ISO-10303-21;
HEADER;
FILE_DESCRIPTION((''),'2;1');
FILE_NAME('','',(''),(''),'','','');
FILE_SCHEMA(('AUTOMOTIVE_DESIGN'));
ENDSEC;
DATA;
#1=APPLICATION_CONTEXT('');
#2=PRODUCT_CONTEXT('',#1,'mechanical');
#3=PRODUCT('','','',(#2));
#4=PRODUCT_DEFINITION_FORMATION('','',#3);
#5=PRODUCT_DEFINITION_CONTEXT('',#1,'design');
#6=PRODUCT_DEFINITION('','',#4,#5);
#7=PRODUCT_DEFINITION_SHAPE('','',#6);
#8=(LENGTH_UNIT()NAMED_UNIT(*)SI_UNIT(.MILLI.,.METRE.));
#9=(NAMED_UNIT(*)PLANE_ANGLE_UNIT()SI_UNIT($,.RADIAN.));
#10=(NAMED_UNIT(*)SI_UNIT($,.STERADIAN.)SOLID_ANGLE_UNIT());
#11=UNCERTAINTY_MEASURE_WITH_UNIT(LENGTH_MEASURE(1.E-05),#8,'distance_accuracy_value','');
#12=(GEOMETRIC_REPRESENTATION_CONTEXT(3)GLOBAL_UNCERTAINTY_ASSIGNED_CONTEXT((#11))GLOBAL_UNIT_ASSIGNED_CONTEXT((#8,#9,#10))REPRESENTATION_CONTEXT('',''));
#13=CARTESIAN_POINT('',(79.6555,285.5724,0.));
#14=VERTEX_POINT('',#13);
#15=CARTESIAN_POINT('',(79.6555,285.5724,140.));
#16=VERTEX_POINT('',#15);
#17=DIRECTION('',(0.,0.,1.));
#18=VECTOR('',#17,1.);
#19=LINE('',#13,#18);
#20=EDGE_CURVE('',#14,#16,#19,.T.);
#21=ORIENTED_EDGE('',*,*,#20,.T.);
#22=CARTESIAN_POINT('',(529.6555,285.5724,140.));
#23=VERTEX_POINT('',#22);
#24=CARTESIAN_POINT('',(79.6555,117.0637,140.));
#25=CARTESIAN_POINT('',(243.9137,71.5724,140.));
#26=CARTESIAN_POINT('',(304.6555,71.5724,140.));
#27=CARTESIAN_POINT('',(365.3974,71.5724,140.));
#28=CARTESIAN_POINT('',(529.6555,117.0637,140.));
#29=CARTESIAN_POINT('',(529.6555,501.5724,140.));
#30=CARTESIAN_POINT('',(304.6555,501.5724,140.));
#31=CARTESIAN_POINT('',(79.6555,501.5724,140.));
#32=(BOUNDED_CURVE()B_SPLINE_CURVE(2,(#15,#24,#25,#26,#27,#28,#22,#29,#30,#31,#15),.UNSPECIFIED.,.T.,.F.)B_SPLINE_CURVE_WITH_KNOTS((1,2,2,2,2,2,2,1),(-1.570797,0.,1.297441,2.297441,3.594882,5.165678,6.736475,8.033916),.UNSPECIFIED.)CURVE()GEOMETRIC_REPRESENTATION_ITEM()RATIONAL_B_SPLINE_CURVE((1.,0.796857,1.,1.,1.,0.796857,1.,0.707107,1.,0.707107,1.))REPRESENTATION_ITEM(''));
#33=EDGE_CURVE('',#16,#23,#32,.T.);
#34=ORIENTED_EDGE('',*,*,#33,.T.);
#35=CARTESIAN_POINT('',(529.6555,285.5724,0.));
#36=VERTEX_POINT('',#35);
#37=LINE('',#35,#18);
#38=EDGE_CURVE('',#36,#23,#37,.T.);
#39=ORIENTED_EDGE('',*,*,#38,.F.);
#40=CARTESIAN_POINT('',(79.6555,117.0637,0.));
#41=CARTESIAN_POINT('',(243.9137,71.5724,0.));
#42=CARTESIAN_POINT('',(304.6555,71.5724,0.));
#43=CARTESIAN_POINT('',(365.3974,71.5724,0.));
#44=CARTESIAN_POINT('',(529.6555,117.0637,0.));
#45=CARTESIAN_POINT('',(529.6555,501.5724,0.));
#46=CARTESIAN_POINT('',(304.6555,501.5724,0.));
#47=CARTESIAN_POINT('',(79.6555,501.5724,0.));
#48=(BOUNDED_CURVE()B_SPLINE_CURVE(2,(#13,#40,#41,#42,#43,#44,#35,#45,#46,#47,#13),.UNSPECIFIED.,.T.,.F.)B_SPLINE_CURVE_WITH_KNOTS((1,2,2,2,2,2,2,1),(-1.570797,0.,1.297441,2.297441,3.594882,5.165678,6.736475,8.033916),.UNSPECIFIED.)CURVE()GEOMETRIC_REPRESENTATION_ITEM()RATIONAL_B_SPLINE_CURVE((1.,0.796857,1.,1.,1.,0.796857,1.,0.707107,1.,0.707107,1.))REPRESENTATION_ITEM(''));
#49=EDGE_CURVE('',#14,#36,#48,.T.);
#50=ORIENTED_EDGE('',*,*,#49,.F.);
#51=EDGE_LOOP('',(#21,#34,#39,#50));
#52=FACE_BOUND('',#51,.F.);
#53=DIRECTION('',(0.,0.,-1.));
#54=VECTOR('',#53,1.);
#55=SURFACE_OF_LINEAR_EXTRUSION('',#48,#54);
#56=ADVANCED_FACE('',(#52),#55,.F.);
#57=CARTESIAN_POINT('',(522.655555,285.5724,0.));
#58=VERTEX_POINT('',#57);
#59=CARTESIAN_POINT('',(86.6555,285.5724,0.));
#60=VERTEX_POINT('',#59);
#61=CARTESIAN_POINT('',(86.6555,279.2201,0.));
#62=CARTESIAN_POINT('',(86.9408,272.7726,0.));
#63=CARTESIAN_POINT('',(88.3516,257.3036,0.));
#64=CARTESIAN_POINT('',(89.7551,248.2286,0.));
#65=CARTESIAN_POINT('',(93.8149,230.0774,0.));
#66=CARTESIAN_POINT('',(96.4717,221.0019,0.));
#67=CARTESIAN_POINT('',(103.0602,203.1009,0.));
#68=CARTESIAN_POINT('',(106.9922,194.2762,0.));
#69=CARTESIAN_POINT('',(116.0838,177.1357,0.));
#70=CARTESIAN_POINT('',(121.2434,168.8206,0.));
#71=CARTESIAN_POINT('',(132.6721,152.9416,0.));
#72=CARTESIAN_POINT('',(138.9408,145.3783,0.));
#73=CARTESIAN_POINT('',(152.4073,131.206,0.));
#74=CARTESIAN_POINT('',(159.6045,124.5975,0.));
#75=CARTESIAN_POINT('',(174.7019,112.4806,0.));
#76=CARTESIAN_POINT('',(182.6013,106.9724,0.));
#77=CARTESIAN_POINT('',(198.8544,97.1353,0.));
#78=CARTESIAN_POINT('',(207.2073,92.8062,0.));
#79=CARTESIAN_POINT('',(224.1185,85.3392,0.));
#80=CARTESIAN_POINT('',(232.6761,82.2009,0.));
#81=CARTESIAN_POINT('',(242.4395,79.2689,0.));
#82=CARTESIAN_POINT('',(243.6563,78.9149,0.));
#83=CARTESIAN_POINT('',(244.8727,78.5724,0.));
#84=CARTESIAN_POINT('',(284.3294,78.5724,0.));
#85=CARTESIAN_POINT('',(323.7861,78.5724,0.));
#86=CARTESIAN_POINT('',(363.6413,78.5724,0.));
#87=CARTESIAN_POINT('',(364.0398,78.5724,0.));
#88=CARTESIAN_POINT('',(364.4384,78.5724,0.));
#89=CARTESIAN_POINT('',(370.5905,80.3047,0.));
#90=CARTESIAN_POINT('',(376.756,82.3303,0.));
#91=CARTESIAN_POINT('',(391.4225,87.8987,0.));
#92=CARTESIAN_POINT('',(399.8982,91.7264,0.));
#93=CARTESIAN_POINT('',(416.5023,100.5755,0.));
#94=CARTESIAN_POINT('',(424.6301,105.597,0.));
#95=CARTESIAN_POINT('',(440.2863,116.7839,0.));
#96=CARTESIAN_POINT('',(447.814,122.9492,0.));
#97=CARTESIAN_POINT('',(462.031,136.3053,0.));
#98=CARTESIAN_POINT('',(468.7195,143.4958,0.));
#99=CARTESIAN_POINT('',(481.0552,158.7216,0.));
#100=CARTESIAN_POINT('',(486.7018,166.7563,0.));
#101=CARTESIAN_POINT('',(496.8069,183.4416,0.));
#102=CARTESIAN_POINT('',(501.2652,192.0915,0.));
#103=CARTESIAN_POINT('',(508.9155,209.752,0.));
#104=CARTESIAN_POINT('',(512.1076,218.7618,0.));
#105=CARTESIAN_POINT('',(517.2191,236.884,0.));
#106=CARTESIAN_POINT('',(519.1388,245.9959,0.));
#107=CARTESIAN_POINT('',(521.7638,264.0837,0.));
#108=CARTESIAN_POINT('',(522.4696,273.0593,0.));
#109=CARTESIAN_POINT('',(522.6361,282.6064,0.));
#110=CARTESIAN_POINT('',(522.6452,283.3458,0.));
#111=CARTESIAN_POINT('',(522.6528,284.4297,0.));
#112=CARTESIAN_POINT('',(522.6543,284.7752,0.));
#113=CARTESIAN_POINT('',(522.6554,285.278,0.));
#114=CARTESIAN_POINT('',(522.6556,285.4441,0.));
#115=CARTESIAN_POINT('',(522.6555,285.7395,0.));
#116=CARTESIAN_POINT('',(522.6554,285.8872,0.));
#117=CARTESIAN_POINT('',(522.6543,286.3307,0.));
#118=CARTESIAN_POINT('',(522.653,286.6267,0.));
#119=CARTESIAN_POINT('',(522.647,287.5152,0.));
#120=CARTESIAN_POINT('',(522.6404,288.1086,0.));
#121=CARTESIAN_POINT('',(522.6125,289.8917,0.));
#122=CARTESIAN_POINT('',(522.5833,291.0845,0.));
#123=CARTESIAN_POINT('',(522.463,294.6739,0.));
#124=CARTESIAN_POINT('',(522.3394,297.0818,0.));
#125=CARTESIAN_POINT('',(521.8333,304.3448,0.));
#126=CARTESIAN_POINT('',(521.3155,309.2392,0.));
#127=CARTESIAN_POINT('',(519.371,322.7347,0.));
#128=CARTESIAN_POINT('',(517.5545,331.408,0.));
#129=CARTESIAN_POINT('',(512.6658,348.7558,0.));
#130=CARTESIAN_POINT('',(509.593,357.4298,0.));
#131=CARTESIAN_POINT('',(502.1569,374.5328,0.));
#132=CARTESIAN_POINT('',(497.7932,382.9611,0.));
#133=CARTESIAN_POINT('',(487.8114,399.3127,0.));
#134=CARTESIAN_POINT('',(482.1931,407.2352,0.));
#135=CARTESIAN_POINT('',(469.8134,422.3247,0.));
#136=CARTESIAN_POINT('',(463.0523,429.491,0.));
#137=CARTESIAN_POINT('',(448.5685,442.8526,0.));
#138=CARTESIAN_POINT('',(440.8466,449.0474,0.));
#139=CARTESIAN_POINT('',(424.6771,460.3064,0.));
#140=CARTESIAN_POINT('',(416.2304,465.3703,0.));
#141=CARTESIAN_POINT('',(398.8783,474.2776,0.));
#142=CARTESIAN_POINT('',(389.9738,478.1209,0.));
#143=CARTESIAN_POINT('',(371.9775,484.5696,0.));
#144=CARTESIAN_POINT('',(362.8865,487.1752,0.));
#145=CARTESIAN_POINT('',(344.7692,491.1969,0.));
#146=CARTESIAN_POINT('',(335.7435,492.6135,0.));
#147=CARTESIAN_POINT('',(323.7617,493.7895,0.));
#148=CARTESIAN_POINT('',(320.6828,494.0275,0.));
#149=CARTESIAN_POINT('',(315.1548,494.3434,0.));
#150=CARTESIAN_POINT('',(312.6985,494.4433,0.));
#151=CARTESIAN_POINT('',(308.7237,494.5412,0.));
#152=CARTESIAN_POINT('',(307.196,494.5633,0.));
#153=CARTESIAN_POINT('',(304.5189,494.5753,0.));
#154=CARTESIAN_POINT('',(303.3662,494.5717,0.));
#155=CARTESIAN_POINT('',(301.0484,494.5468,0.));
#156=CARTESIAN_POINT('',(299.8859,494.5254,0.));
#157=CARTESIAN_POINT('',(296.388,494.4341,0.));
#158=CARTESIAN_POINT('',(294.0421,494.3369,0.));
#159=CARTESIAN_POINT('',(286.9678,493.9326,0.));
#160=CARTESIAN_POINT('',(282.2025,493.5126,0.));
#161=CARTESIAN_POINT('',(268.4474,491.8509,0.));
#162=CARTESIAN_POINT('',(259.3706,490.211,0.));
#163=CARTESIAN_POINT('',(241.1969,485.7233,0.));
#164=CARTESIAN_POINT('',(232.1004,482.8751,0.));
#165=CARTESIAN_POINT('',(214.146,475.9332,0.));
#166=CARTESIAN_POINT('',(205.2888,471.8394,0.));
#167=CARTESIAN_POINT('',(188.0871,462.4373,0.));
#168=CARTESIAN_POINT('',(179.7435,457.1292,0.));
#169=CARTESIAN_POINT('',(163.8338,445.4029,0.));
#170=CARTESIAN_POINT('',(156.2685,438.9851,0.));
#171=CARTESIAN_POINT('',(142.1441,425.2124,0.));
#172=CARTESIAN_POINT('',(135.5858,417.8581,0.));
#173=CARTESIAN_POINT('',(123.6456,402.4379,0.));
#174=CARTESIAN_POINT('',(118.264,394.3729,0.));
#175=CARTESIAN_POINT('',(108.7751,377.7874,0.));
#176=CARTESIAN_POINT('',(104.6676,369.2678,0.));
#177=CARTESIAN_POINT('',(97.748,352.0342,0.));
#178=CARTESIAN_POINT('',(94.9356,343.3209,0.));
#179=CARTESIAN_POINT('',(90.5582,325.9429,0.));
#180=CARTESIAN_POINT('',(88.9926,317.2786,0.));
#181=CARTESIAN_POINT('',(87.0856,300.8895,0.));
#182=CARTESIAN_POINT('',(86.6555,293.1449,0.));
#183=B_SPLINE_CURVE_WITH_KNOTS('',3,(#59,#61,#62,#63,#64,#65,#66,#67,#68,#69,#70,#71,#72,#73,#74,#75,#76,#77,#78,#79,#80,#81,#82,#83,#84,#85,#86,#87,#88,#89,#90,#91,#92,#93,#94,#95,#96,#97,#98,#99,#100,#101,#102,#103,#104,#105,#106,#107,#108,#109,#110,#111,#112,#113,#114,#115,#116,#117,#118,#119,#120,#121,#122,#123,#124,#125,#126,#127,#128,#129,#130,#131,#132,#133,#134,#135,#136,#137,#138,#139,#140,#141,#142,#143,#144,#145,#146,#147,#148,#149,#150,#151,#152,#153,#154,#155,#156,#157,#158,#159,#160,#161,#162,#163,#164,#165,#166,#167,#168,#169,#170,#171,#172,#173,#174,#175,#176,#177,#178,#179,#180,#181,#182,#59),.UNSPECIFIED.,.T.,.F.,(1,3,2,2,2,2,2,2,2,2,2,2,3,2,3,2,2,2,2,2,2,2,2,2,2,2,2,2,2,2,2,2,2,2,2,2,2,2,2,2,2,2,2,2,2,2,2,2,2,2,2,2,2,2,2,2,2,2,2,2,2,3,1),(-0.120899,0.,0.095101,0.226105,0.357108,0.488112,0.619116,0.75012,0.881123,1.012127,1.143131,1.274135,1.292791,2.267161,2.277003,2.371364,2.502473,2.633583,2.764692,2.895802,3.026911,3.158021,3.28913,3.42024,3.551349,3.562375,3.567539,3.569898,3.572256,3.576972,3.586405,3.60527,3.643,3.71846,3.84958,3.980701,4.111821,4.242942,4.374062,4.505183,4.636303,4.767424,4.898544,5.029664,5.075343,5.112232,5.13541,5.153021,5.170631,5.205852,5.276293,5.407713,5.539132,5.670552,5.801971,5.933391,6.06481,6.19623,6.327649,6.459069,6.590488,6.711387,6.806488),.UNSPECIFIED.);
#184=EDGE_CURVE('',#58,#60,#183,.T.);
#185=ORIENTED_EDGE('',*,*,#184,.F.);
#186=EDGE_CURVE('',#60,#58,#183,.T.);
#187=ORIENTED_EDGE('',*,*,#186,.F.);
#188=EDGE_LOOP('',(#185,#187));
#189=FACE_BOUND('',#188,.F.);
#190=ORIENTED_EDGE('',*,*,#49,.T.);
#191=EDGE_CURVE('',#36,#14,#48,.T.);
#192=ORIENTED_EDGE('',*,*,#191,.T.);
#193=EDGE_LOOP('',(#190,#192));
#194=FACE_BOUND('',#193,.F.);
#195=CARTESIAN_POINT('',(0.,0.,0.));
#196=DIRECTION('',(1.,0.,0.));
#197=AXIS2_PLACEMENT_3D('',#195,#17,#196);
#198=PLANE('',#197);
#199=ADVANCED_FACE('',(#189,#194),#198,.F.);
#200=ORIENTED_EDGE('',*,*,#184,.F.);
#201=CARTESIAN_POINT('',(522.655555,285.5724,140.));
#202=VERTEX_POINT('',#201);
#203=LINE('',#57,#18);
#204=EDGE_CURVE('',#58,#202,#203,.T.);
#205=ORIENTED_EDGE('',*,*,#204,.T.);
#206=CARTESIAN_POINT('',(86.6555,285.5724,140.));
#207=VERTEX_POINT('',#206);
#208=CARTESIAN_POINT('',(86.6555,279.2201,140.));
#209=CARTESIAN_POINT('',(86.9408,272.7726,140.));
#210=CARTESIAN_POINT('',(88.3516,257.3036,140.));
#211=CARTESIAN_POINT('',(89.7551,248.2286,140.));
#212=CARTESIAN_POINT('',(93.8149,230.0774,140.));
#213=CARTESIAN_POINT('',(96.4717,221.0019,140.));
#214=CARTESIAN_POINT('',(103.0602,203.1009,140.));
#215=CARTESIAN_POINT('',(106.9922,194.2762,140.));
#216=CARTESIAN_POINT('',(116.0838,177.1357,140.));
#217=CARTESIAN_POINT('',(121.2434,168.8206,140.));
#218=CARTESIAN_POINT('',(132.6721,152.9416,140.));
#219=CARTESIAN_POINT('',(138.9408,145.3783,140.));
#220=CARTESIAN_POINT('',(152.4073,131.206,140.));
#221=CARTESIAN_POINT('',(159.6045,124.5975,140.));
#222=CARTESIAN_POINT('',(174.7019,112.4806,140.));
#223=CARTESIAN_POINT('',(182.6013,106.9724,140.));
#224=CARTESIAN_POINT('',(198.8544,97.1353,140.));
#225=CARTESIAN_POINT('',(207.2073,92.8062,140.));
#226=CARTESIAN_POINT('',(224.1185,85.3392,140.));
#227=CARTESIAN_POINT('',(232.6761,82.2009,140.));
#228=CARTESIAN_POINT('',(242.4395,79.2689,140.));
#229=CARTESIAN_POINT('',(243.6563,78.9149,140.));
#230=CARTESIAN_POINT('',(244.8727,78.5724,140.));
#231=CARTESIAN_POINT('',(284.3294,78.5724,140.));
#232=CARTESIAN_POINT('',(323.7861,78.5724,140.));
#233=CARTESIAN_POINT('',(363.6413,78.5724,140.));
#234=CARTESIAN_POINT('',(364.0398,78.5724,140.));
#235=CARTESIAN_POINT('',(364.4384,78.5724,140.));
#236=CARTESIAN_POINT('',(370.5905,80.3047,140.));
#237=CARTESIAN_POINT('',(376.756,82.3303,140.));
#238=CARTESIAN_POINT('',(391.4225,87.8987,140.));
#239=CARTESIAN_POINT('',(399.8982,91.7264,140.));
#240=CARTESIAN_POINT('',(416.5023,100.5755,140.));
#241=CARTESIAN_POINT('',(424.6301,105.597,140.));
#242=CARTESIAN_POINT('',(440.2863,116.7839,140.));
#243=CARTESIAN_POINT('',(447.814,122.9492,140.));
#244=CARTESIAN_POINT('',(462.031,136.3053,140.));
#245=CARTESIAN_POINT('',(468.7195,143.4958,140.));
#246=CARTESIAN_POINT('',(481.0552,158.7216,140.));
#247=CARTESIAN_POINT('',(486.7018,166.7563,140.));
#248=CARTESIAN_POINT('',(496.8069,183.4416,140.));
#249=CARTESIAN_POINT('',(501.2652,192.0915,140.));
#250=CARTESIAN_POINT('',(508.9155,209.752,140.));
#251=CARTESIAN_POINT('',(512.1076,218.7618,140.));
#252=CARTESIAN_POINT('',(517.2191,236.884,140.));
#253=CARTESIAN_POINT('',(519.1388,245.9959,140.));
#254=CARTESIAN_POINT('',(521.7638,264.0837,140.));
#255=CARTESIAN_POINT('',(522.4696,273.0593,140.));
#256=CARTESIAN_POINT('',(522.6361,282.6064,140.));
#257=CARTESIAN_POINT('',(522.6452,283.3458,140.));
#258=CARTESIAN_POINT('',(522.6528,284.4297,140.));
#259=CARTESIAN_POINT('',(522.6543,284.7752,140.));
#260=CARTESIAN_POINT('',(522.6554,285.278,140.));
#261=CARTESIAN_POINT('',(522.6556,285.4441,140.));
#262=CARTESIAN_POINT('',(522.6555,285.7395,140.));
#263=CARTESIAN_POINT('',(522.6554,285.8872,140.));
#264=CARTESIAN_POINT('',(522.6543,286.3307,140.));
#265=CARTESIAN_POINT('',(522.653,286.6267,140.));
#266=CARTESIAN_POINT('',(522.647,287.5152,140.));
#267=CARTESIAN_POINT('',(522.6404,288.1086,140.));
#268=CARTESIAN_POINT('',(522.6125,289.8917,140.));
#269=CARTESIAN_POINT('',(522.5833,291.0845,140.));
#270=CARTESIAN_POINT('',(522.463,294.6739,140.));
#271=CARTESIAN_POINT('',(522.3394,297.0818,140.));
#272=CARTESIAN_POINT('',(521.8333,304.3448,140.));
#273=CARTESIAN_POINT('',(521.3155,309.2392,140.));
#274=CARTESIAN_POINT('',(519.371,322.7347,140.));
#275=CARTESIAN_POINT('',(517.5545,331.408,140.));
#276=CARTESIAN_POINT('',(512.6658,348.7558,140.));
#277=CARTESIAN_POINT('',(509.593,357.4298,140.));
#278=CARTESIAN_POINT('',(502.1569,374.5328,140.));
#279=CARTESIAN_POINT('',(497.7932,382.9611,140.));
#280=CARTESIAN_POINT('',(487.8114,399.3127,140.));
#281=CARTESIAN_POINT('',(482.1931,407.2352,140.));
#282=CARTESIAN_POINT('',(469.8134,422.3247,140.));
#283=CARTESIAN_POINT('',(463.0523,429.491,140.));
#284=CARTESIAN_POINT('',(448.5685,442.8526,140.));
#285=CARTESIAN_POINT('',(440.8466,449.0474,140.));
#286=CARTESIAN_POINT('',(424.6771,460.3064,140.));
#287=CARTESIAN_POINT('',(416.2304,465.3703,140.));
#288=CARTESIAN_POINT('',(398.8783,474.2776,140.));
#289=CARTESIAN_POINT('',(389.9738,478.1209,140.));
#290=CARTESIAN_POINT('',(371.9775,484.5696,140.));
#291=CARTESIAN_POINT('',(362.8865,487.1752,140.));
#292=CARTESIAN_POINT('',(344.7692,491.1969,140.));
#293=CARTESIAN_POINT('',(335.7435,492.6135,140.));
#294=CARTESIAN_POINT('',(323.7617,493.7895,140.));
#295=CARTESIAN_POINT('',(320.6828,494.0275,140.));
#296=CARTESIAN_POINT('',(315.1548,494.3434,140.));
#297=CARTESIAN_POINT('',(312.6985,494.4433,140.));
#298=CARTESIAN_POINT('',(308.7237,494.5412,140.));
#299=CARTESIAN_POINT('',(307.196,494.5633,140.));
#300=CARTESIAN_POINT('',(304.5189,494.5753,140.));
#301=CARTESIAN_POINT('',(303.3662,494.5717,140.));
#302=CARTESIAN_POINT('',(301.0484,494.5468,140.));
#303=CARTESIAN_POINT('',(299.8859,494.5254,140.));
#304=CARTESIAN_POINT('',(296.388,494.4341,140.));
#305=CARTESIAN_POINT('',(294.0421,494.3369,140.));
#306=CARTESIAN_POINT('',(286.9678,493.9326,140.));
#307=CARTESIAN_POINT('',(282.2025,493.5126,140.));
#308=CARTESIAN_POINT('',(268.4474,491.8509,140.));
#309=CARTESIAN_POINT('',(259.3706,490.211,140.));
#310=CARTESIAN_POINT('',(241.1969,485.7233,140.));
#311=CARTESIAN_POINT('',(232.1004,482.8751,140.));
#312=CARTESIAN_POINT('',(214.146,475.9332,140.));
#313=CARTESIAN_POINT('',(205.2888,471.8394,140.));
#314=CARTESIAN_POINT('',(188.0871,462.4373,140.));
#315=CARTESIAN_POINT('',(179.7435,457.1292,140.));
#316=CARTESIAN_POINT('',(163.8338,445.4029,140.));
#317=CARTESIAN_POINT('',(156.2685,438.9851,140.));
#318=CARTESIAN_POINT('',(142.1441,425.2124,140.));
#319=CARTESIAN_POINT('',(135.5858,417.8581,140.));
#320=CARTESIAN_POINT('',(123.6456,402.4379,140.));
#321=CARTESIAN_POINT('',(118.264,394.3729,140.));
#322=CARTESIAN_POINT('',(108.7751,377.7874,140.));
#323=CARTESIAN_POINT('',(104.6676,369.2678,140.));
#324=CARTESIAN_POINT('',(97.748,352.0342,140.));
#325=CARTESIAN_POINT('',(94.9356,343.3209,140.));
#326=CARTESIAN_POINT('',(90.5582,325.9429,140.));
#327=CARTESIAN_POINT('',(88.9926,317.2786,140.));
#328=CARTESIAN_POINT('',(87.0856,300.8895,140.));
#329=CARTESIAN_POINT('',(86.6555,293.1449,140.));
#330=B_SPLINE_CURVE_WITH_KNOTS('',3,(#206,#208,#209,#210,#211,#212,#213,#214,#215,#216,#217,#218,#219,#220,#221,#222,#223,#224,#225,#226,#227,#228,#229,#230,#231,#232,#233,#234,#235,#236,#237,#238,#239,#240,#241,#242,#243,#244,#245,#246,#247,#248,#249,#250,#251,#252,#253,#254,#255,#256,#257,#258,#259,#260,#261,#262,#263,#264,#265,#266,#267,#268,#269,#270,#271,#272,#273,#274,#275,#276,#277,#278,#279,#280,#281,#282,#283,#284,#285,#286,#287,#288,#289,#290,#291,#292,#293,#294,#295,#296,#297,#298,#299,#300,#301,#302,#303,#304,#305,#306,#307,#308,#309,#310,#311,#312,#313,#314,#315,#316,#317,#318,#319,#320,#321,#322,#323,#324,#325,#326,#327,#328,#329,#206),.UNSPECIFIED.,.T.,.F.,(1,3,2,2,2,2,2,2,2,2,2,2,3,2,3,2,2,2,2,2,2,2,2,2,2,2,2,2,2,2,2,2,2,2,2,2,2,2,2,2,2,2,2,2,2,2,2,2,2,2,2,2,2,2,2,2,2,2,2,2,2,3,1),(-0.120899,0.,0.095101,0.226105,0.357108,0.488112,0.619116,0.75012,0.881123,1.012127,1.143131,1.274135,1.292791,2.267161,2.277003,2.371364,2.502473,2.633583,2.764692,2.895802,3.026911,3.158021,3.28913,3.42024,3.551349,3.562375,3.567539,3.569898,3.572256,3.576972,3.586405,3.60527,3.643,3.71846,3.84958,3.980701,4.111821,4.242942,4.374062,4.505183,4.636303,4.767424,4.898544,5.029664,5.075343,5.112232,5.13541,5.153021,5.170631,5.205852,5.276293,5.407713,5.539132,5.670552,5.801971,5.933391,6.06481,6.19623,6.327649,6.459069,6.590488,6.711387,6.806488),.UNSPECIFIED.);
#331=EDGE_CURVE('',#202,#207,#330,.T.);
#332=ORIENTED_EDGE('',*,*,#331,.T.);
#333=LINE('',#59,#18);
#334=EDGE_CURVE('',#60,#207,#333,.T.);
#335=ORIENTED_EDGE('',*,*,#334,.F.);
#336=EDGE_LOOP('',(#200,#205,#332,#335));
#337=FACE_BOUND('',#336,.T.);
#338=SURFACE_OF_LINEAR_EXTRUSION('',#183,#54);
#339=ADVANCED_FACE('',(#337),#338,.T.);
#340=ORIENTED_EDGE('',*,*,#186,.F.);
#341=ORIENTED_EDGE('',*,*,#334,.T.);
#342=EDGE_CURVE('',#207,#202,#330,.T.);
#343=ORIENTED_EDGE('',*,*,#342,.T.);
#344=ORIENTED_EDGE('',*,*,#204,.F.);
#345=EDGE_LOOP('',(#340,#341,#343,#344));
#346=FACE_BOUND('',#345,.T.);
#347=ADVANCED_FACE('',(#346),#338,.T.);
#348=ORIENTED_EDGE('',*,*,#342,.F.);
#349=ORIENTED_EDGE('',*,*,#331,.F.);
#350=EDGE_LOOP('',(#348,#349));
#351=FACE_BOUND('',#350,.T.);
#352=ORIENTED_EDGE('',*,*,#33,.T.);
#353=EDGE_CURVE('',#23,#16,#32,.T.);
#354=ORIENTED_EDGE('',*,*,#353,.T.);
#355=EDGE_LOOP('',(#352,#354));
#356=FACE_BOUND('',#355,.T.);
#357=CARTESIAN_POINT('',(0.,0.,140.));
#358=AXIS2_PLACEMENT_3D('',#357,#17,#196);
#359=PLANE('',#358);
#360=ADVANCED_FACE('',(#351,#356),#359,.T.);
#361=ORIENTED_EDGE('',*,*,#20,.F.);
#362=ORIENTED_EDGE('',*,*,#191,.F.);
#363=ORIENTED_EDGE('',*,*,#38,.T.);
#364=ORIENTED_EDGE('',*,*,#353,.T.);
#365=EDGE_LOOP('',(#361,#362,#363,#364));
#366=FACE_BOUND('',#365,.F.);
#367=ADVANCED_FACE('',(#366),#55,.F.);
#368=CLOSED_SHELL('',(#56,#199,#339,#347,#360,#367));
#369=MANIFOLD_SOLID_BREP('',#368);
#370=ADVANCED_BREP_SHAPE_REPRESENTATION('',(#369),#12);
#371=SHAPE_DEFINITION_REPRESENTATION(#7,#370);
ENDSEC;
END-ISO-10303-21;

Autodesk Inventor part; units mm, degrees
ref_plane "YZ Plane" through (0, 0, 0) normal (1, 0, 0) x (0, 1, 0)
ref_plane "XZ Plane" through (0, 0, 0) normal (0, 1, 0) x (-1, 0, 0)
ref_plane "XY Plane" through (0, 0, 0) normal (0, 0, 1) x (1, 0, 0)
sketch "스케치1" plane through (0, 0, 0) normal (0, 0, 1) x (1, 0, 0)
  line L0 (0.6532, 285.5724) -> (608.6579, 285.5724)
  circle A0 centre (304.6555, 285.5724) radius 26
  spline S0 degree 3 poles (86.6555, 285.5724) (86.6555, 279.2201) (86.9408, 272.7726) (88.3516, 257.3036) (89.7551, 248.2286) (93.8149, 230.0774) (96.4717, 221.0019) (103.0602, 203.1009) (106.9922, 194.2762) (116.0838, 177.1357) (121.2434, 168.8206) (132.6721, 152.9416) (138.9408, 145.3783) (152.4073, 131.206) (159.6045, 124.5975) (174.7019, 112.4806) (182.6013, 106.9724) (198.8544, 97.1353) (207.2073, 92.8062) (224.1185, 85.3392) (232.6761, 82.2009) (242.4395, 79.2689) (243.6563, 78.9149) (244.8727, 78.5724) (284.3294, 78.5724) (323.7861, 78.5724) (363.6413, 78.5724) (364.0398, 78.5724) (364.4384, 78.5724) (370.5905, 80.3047) (376.756, 82.3303) (391.4225, 87.8987) (399.8982, 91.7264) (416.5023, 100.5755) (424.6301, 105.597) (440.2863, 116.7839) (447.814, 122.9492) (462.031, 136.3053) (468.7195, 143.4958) (481.0552, 158.7216) (486.7018, 166.7563) (496.8069, 183.4416) (501.2652, 192.0915) (508.9155, 209.752) (512.1076, 218.7618) (517.2191, 236.884) (519.1388, 245.9959) (521.7638, 264.0837) (522.4696, 273.0593) (522.6361, 282.6064) (522.6452, 283.3458) (522.6528, 284.4297) (522.6543, 284.7752) (522.6554, 285.278) (522.6556, 285.4441) (522.6555, 285.7395) (522.6554, 285.8872) (522.6543, 286.3307) (522.653, 286.6267) (522.647, 287.5152) (522.6404, 288.1086) (522.6125, 289.8917) (522.5833, 291.0845) (522.463, 294.6739) (522.3394, 297.0818) (521.8333, 304.3448) (521.3155, 309.2392) (519.371, 322.7347) (517.5545, 331.408) (512.6658, 348.7558) (509.593, 357.4298) (502.1569, 374.5328) (497.7932, 382.9611) (487.8114, 399.3127) (482.1931, 407.2352) (469.8134, 422.3247) (463.0523, 429.491) (448.5685, 442.8526) (440.8466, 449.0474) (424.6771, 460.3064) (416.2304, 465.3703) (398.8783, 474.2776) (389.9738, 478.1209) (371.9775, 484.5696) (362.8865, 487.1752) (344.7692, 491.1969) (335.7435, 492.6135) (323.7617, 493.7895) (320.6828, 494.0275) (315.1548, 494.3434) (312.6985, 494.4433) (308.7237, 494.5412) (307.196, 494.5633) (304.5189, 494.5753) (303.3662, 494.5717) (301.0484, 494.5468) (299.8859, 494.5254) (296.388, 494.4341) (294.0421, 494.3369) (286.9678, 493.9326) (282.2025, 493.5126) (268.4474, 491.8509) (259.3706, 490.211) (241.1969, 485.7233) (232.1004, 482.8751) (214.146, 475.9332) (205.2888, 471.8394) (188.0871, 462.4373) (179.7435, 457.1292) (163.8338, 445.4029) (156.2685, 438.9851) (142.1441, 425.2124) (135.5858, 417.8581) (123.6456, 402.4379) (118.264, 394.3729) (108.7751, 377.7874) (104.6676, 369.2678) (97.748, 352.0342) (94.9356, 343.3209) (90.5582, 325.9429) (88.9926, 317.2786) (87.0856, 300.8895) (86.6555, 293.1449) (86.6555, 285.5724) knots 0 0 0 0 0.095101 0.095101 0.226105 0.226105 0.357108 0.357108 0.488112 0.488112 0.619116 0.619116 0.75012 0.75012 0.881123 0.881123 1.012127 1.012127 1.143131 1.143131 1.274135 1.274135 1.292791 1.292791 1.292791 2.267161 2.267161 2.277003 2.277003 2.277003 2.371364 2.371364 2.502473 2.502473 2.633583 2.633583 2.764692 2.764692 2.895802 2.895802 3.026911 3.026911 3.158021 3.158021 3.28913 3.28913 3.42024 3.42024 3.551349 3.551349 3.562375 3.562375 3.567539 3.567539 3.569898 3.569898 3.572256 3.572256 3.576972 3.576972 3.586405 3.586405 3.60527 3.60527 3.643 3.643 3.71846 3.71846 3.84958 3.84958 3.980701 3.980701 4.111821 4.111821 4.242942 4.242942 4.374062 4.374062 4.505183 4.505183 4.636303 4.636303 4.767424 4.767424 4.898544 4.898544 5.029664 5.029664 5.075343 5.075343 5.112232 5.112232 5.13541 5.13541 5.153021 5.153021 5.170631 5.170631 5.205852 5.205852 5.276293 5.276293 5.407713 5.407713 5.539132 5.539132 5.670552 5.670552 5.801971 5.801971 5.933391 5.933391 6.06481 6.06481 6.19623 6.19623 6.327649 6.327649 6.459069 6.459069 6.590488 6.590488 6.711387 6.711387 6.711387 6.711387
  line L1 (86.6555, 285.5724) -> (86.6555, 279.2201) construction
  line L2 (86.6555, 279.2201) -> (86.9408, 272.7726) construction
  line L3 (86.9408, 272.7726) -> (88.3516, 257.3036) construction
  line L4 (88.3516, 257.3036) -> (89.7551, 248.2286) construction
  line L5 (89.7551, 248.2286) -> (93.8149, 230.0774) construction
  line L6 (93.8149, 230.0774) -> (96.4717, 221.0019) construction
  line L7 (96.4717, 221.0019) -> (103.0602, 203.1009) construction
  line L8 (103.0602, 203.1009) -> (106.9922, 194.2762) construction
  line L9 (106.9922, 194.2762) -> (116.0838, 177.1357) construction
  line L10 (116.0838, 177.1357) -> (121.2434, 168.8206) construction
  line L11 (121.2434, 168.8206) -> (132.6721, 152.9416) construction
  line L12 (132.6721, 152.9416) -> (138.9408, 145.3783) construction
  line L13 (138.9408, 145.3783) -> (152.4073, 131.206) construction
  line L14 (152.4073, 131.206) -> (159.6045, 124.5975) construction
  line L15 (159.6045, 124.5975) -> (174.7019, 112.4806) construction
  line L16 (174.7019, 112.4806) -> (182.6013, 106.9724) construction
  line L17 (182.6013, 106.9724) -> (198.8544, 97.1353) construction
  line L18 (198.8544, 97.1353) -> (207.2073, 92.8062) construction
  line L19 (207.2073, 92.8062) -> (224.1185, 85.3392) construction
  line L20 (224.1185, 85.3392) -> (232.6761, 82.2009) construction
  line L21 (232.6761, 82.2009) -> (242.4395, 79.2689) construction
  line L22 (242.4395, 79.2689) -> (243.6563, 78.9149) construction
  line L23 (243.6563, 78.9149) -> (244.8727, 78.5724) construction
  line L24 (244.8727, 78.5724) -> (284.3294, 78.5724) construction
  line L25 (284.3294, 78.5724) -> (323.7861, 78.5724) construction
  line L26 (323.7861, 78.5724) -> (363.6413, 78.5724) construction
  line L27 (363.6413, 78.5724) -> (364.0398, 78.5724) construction
  line L28 (364.0398, 78.5724) -> (364.4384, 78.5724) construction
  line L29 (364.4384, 78.5724) -> (370.5905, 80.3047) construction
  line L30 (370.5905, 80.3047) -> (376.756, 82.3303) construction
  line L31 (376.756, 82.3303) -> (391.4225, 87.8987) construction
  line L32 (391.4225, 87.8987) -> (399.8982, 91.7264) construction
  line L33 (399.8982, 91.7264) -> (416.5023, 100.5755) construction
  line L34 (416.5023, 100.5755) -> (424.6301, 105.597) construction
  line L35 (424.6301, 105.597) -> (440.2863, 116.7839) construction
  line L36 (440.2863, 116.7839) -> (447.814, 122.9492) construction
  line L37 (447.814, 122.9492) -> (462.031, 136.3053) construction
  line L38 (462.031, 136.3053) -> (468.7195, 143.4958) construction
  line L39 (468.7195, 143.4958) -> (481.0552, 158.7216) construction
  line L40 (481.0552, 158.7216) -> (486.7018, 166.7563) construction
  line L41 (486.7018, 166.7563) -> (496.8069, 183.4416) construction
  line L42 (496.8069, 183.4416) -> (501.2652, 192.0915) construction
  line L43 (501.2652, 192.0915) -> (508.9155, 209.752) construction
  line L44 (508.9155, 209.752) -> (512.1076, 218.7618) construction
  line L45 (512.1076, 218.7618) -> (517.2191, 236.884) construction
  line L46 (517.2191, 236.884) -> (519.1388, 245.9959) construction
  line L47 (519.1388, 245.9959) -> (521.7638, 264.0837) construction
  line L48 (521.7638, 264.0837) -> (522.4696, 273.0593) construction
  line L49 (522.4696, 273.0593) -> (522.6361, 282.6064) construction
  line L50 (522.6361, 282.6064) -> (522.6452, 283.3458) construction
  line L51 (522.6452, 283.3458) -> (522.6528, 284.4297) construction
  line L52 (522.6528, 284.4297) -> (522.6543, 284.7752) construction
  line L53 (522.6543, 284.7752) -> (522.6554, 285.278) construction
  line L54 (522.6554, 285.278) -> (522.6556, 285.4441) construction
  line L55 (522.6556, 285.4441) -> (522.6555, 285.7395) construction
  line L56 (522.6555, 285.7395) -> (522.6554, 285.8872) construction
  line L57 (522.6554, 285.8872) -> (522.6543, 286.3307) construction
  line L58 (522.6543, 286.3307) -> (522.653, 286.6267) construction
  line L59 (522.653, 286.6267) -> (522.647, 287.5152) construction
  line L60 (522.647, 287.5152) -> (522.6404, 288.1086) construction
  line L61 (522.6404, 288.1086) -> (522.6125, 289.8917) construction
  line L62 (522.6125, 289.8917) -> (522.5833, 291.0845) construction
  line L63 (522.5833, 291.0845) -> (522.463, 294.6739) construction
  line L64 (522.463, 294.6739) -> (522.3394, 297.0818) construction
  line L65 (522.3394, 297.0818) -> (521.8333, 304.3448) construction
  line L66 (521.8333, 304.3448) -> (521.3155, 309.2392) construction
  line L67 (521.3155, 309.2392) -> (519.371, 322.7347) construction
  line L68 (519.371, 322.7347) -> (517.5545, 331.408) construction
  line L69 (517.5545, 331.408) -> (512.6658, 348.7558) construction
  line L70 (512.6658, 348.7558) -> (509.593, 357.4298) construction
  line L71 (509.593, 357.4298) -> (502.1569, 374.5328) construction
  line L72 (502.1569, 374.5328) -> (497.7932, 382.9611) construction
  line L73 (497.7932, 382.9611) -> (487.8114, 399.3127) construction
  line L74 (487.8114, 399.3127) -> (482.1931, 407.2352) construction
  line L75 (482.1931, 407.2352) -> (469.8134, 422.3247) construction
  line L76 (469.8134, 422.3247) -> (463.0523, 429.491) construction
  line L77 (463.0523, 429.491) -> (448.5685, 442.8526) construction
  line L78 (448.5685, 442.8526) -> (440.8466, 449.0474) construction
  line L79 (440.8466, 449.0474) -> (424.6771, 460.3064) construction
  line L80 (424.6771, 460.3064) -> (416.2304, 465.3703) construction
  line L81 (416.2304, 465.3703) -> (398.8783, 474.2776) construction
  line L82 (398.8783, 474.2776) -> (389.9738, 478.1209) construction
  line L83 (389.9738, 478.1209) -> (371.9775, 484.5696) construction
  line L84 (371.9775, 484.5696) -> (362.8865, 487.1752) construction
  line L85 (362.8865, 487.1752) -> (344.7692, 491.1969) construction
  line L86 (344.7692, 491.1969) -> (335.7435, 492.6135) construction
  line L87 (335.7435, 492.6135) -> (323.7617, 493.7895) construction
  line L88 (323.7617, 493.7895) -> (320.6828, 494.0275) construction
  line L89 (320.6828, 494.0275) -> (315.1548, 494.3434) construction
  line L90 (315.1548, 494.3434) -> (312.6985, 494.4433) construction
  line L91 (312.6985, 494.4433) -> (308.7237, 494.5412) construction
  line L92 (308.7237, 494.5412) -> (307.196, 494.5633) construction
  line L93 (307.196, 494.5633) -> (304.5189, 494.5753) construction
  line L94 (304.5189, 494.5753) -> (303.3662, 494.5717) construction
  line L95 (303.3662, 494.5717) -> (301.0484, 494.5468) construction
  line L96 (301.0484, 494.5468) -> (299.8859, 494.5254) construction
  line L97 (299.8859, 494.5254) -> (296.388, 494.4341) construction
  line L98 (296.388, 494.4341) -> (294.0421, 494.3369) construction
  line L99 (294.0421, 494.3369) -> (286.9678, 493.9326) construction
  line L100 (286.9678, 493.9326) -> (282.2025, 493.5126) construction
  line L101 (282.2025, 493.5126) -> (268.4474, 491.8509) construction
  line L102 (268.4474, 491.8509) -> (259.3706, 490.211) construction
  line L103 (259.3706, 490.211) -> (241.1969, 485.7233) construction
  line L104 (241.1969, 485.7233) -> (232.1004, 482.8751) construction
  line L105 (232.1004, 482.8751) -> (214.146, 475.9332) construction
  line L106 (214.146, 475.9332) -> (205.2888, 471.8394) construction
  line L107 (205.2888, 471.8394) -> (188.0871, 462.4373) construction
  line L108 (188.0871, 462.4373) -> (179.7435, 457.1292) construction
  line L109 (179.7435, 457.1292) -> (163.8338, 445.4029) construction
  line L110 (163.8338, 445.4029) -> (156.2685, 438.9851) construction
  line L111 (156.2685, 438.9851) -> (142.1441, 425.2124) construction
  line L112 (142.1441, 425.2124) -> (135.5858, 417.8581) construction
  line L113 (135.5858, 417.8581) -> (123.6456, 402.4379) construction
  line L114 (123.6456, 402.4379) -> (118.264, 394.3729) construction
  line L115 (118.264, 394.3729) -> (108.7751, 377.7874) construction
  line L116 (108.7751, 377.7874) -> (104.6676, 369.2678) construction
  line L117 (104.6676, 369.2678) -> (97.748, 352.0342) construction
  line L118 (97.748, 352.0342) -> (94.9356, 343.3209) construction
  line L119 (94.9356, 343.3209) -> (90.5582, 325.9429) construction
  line L120 (90.5582, 325.9429) -> (88.9926, 317.2786) construction
  line L121 (88.9926, 317.2786) -> (87.0856, 300.8895) construction
  line L122 (87.0856, 300.8895) -> (86.6555, 293.1449) construction
  line L123 (86.6555, 293.1449) -> (86.6555, 285.5724) construction
  spline S1 degree 2 poles (79.6555, 285.5724) (79.6555, 117.0637) (243.9137, 71.5724) (304.6555, 71.5724) (365.3974, 71.5724) (529.6555, 117.0637) (529.6555, 285.5724) (529.6555, 501.5724) (304.6555, 501.5724) (79.6555, 501.5724) (79.6555, 285.5724) knots 0 0 0 1.297441 1.297441 2.297441 2.297441 3.594882 3.594882 5.165678 5.165678 6.736475 6.736475 6.736475 weights 1 0.796857 1 1 1 0.796857 1 0.707107 1 0.707107 1
  line L124 (79.6555, 285.5724) -> (79.6555, 117.0637) construction
  line L125 (79.6555, 117.0637) -> (243.9137, 71.5724) construction
  line L126 (243.9137, 71.5724) -> (304.6555, 71.5724) construction
  line L127 (304.6555, 71.5724) -> (365.3974, 71.5724) construction
  line L128 (365.3974, 71.5724) -> (529.6555, 117.0637) construction
  line L129 (529.6555, 117.0637) -> (529.6555, 285.5724) construction
  line L130 (529.6555, 285.5724) -> (529.6555, 501.5724) construction
  line L131 (529.6555, 501.5724) -> (304.6555, 501.5724) construction
  line L132 (304.6555, 501.5724) -> (79.6555, 501.5724) construction
  line L133 (79.6555, 501.5724) -> (79.6555, 285.5724) construction
  line L134 (246.6555, 209.5724) -> (362.6555, 209.5724)
  line L135 (246.6555, 189.5724) -> (362.6555, 189.5724)
  line L136 (246.6555, 209.5724) -> (246.6555, 189.5724)
  line L137 (362.6555, 209.5724) -> (362.6555, 189.5724)
  point P0 (0, 0)
  dimension "d1" = 225
  dimension "d3" = 52
  dimension "d5" = 20
extrude "돌출1" add sketch "스케치1" along normal blind 140 contours S1 L0 S0 | L0 S0 S1
sketch "스케치2" plane through (0, 0, 0) normal (0, 0, -1) x (-1, 0, 0)
  ellipse E0 centre (-304.6555, 285.5724) end of major axis (-529.6555, 285.5724) minor radius 222.2521 (-243.9137, 71.5724) -> (-79.6555, 285.5724) ccw projected
  line L0 (-243.9137, 71.5724) -> (-365.3974, 71.5724) projected
  line L1 (-179.6555, 0) -> (-179.6555, 571.5724)
  line L2 (-279.6555, 0) -> (-279.6555, 571.5724)
  line L3 (-379.6555, 0) -> (-379.6555, 571.5724)
  line L4 (-479.6555, 0) -> (-479.6555, 571.5724)
  line L5 (-579.6555, 0) -> (-579.6555, 571.5724)
  line L6 (0, 71.5724) -> (-668.4284, 71.5724)
  line L7 (0, 171.5724) -> (-668.4284, 171.5724)
  line L8 (0, 271.5724) -> (-668.4284, 271.5724)
  line L9 (0, 371.5724) -> (-668.4284, 371.5724)
  line L10 (0, 471.5724) -> (-668.4284, 471.5724)
  line L11 (0, 571.5724) -> (-668.4284, 571.5724)
  line L12 (-79.6555, 0) -> (-79.6555, 571.5724)
  point P0 (0, 0)
  dimension "d10" = 100
  dimension "d11" = 100
  dimension "d12" = 100
  dimension "d13" = 100
  dimension "d15" = 100
  dimension "d16" = 100
  dimension "d17" = 100
  dimension "d18" = 100
  dimension "d19" = 100
  dimension "d20" = 100
  dimension "d21" = 668.4284
equation "\"TransitionRadius\" = BendRadius"
equation "\"BendRadius\" = 0.5"
properties part number "본체"
